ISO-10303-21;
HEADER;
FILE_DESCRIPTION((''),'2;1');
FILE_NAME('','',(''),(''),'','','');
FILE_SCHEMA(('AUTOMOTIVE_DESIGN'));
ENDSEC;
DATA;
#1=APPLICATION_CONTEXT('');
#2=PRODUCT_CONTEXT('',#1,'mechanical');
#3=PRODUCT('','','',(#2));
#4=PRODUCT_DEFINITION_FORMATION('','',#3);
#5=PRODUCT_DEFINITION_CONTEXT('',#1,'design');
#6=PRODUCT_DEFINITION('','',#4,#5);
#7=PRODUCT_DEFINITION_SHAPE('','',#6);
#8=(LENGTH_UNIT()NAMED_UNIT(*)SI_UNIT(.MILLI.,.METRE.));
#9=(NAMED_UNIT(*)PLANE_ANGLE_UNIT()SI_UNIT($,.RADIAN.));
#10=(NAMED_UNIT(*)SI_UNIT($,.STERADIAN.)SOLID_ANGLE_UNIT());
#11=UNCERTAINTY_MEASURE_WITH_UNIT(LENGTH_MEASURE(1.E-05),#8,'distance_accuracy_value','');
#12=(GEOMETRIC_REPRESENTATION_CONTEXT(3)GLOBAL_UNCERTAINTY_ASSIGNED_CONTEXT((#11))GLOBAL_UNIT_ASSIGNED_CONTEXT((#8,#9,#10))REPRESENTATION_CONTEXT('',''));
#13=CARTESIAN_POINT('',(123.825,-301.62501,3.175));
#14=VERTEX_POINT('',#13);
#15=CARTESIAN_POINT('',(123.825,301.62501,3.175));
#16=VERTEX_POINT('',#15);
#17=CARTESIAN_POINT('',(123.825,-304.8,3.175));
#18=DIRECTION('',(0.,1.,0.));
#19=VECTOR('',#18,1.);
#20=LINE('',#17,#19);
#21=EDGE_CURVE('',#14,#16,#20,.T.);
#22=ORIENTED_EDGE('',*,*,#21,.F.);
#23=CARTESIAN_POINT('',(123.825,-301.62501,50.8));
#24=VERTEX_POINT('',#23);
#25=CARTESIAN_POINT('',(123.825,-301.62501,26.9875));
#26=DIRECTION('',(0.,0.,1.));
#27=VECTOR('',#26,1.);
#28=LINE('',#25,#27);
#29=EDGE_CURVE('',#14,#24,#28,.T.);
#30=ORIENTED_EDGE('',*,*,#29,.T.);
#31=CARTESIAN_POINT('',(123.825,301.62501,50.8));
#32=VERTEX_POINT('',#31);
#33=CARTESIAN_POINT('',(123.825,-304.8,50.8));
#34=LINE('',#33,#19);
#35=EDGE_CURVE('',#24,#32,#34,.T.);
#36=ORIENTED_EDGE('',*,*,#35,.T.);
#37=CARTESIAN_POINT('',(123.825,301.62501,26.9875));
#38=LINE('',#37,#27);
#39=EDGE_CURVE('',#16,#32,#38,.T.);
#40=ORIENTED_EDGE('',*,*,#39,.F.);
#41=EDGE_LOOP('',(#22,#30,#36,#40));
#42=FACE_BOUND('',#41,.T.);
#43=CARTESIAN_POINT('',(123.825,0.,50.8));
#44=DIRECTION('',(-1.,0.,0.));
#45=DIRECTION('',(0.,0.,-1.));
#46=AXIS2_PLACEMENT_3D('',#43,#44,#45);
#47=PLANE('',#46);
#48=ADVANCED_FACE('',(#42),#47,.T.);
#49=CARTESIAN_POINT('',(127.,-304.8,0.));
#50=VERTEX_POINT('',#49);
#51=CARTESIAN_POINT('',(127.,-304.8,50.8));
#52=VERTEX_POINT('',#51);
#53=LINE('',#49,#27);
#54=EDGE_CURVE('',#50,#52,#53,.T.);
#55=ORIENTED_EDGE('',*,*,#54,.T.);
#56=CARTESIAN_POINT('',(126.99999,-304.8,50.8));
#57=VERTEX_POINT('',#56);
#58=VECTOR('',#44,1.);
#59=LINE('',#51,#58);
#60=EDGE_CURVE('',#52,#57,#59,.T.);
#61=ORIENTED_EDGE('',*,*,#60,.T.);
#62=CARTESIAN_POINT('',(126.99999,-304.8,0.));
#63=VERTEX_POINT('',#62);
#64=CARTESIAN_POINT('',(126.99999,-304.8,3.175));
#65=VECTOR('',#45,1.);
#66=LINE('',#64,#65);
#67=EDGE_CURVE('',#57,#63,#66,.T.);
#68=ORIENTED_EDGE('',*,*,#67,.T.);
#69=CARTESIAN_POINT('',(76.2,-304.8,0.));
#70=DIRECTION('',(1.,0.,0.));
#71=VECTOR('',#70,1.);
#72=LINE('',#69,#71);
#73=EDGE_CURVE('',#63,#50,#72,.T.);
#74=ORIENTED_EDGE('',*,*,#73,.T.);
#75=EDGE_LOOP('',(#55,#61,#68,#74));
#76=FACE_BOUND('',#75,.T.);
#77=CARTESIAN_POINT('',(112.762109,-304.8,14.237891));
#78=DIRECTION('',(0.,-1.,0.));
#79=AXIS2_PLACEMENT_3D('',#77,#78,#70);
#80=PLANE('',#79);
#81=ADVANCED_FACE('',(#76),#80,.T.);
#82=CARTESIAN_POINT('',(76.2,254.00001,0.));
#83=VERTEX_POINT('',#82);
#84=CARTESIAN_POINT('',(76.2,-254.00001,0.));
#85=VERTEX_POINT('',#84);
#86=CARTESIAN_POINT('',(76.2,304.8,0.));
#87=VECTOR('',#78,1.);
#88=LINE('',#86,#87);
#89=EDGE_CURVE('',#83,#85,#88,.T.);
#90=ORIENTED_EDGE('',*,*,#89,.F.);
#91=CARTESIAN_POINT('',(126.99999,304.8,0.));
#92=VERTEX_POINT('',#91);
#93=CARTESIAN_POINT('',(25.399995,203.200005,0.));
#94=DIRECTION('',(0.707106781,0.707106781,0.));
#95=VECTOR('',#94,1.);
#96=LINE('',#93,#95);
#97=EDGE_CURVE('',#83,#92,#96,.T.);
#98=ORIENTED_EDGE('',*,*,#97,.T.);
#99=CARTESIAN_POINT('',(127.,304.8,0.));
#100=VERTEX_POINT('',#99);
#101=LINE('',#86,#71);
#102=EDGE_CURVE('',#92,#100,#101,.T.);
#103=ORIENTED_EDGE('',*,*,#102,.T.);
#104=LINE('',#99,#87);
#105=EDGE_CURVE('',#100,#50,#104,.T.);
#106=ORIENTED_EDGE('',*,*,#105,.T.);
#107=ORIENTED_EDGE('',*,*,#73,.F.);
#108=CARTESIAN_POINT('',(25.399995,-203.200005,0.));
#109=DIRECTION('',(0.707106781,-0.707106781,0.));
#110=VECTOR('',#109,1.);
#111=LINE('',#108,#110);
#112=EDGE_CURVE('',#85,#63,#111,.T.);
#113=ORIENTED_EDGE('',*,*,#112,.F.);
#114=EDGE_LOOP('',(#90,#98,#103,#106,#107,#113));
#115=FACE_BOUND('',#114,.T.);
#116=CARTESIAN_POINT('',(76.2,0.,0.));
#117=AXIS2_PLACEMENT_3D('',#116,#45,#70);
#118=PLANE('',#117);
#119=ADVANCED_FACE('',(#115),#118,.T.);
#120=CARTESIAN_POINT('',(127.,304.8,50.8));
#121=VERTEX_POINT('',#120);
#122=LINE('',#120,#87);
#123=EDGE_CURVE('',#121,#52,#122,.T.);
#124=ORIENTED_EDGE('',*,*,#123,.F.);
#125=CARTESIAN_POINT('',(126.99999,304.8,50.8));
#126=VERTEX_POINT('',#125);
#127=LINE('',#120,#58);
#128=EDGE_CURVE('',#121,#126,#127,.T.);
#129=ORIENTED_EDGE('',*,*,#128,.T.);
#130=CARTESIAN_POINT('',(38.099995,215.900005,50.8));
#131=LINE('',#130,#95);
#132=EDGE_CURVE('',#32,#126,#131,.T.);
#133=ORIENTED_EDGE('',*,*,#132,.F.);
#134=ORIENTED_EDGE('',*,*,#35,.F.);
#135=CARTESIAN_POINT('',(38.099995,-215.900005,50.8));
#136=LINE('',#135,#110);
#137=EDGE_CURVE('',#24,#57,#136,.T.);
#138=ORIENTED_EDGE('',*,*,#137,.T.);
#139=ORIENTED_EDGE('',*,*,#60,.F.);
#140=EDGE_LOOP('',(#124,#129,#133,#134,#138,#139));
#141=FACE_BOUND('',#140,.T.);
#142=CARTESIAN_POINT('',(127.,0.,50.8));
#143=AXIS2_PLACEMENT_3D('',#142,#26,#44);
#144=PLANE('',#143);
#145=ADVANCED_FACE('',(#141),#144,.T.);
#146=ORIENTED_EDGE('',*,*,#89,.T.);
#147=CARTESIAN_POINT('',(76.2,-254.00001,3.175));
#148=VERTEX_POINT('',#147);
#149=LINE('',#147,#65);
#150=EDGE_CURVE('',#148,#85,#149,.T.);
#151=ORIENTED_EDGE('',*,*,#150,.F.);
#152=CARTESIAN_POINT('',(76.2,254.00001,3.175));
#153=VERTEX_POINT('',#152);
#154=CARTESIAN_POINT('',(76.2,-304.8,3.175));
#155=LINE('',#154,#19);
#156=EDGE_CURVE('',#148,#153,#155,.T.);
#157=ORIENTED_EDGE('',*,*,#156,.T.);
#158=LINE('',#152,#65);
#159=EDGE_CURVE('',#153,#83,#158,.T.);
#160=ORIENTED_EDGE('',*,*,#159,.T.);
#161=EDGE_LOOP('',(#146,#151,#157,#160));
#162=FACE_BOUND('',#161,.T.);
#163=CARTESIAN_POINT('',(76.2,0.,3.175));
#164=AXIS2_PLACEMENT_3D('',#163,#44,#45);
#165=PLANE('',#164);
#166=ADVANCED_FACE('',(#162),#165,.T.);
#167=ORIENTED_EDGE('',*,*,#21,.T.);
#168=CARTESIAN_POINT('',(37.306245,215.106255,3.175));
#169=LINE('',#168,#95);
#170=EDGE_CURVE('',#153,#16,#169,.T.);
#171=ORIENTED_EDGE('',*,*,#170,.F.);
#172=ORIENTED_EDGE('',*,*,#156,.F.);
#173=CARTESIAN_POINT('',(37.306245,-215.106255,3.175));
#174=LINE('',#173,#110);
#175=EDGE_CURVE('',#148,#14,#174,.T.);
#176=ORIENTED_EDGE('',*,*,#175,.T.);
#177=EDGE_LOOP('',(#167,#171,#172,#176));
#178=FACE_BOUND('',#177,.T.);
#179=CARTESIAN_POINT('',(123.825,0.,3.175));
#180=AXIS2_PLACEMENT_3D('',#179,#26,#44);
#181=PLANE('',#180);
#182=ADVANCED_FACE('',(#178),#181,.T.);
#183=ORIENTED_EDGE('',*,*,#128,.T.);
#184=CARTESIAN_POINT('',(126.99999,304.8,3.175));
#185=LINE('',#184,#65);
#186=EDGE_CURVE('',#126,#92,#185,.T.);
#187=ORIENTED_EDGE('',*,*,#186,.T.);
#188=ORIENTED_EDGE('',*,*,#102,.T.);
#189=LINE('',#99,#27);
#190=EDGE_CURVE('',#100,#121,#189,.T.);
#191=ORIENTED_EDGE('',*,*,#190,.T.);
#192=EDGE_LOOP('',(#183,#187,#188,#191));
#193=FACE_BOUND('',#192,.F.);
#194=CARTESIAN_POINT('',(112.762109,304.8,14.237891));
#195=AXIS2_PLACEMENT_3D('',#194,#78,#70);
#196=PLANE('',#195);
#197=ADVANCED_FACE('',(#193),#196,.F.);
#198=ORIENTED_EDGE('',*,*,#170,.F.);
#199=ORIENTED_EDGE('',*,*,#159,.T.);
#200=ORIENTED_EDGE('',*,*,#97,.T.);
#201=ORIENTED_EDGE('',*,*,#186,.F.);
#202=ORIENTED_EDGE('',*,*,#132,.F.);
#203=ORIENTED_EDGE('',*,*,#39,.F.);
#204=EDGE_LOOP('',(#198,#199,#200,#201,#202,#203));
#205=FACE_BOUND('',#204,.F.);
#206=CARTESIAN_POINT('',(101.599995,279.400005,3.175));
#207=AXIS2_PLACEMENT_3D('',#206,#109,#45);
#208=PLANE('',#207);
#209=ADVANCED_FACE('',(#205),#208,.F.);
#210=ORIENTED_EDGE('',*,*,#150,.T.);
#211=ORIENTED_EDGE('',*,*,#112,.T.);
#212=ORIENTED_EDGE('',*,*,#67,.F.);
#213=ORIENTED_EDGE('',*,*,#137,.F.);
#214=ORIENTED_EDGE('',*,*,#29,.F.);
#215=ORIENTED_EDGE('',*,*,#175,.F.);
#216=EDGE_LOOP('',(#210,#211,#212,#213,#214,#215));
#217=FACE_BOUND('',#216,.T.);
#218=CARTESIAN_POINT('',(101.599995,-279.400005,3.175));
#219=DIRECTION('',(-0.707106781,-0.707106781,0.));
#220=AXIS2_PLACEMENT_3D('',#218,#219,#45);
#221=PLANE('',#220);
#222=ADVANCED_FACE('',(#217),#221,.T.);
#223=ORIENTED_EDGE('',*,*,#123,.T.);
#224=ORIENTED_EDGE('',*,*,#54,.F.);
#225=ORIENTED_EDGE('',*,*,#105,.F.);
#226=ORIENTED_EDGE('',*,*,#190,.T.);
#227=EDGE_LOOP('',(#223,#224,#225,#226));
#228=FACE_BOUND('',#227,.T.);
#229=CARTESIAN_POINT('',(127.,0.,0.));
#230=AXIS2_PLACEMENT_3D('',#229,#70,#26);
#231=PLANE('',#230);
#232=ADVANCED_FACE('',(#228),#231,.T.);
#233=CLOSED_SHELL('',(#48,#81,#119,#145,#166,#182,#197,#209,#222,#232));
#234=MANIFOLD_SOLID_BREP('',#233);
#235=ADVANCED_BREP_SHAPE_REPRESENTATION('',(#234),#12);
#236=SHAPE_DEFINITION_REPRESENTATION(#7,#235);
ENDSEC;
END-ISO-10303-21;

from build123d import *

# Parameters (mm, degrees)
F1_DEPTH = 304.8
F2_SIZE  = 50.79999
F3_SIZE  = 50.79999


# Not quite as in the source:
# - a fillet or chamfer is up to 0.001 mm smaller than in the source, because OpenCascade refuses the exact size


with BuildPart() as f1:
    # F0 (on Front) → F1 (new body, symmetric)
    with BuildSketch(Plane.XZ):
        Polygon((76.2, 3.175), (76.2, 0), (127, 0), (127, 50.8), (123.825, 50.8), (123.825, 3.175), align=None)
    extrude(amount=F1_DEPTH, both=True)

    # F2 (size 50.8 in the source; OpenCascade refuses exactly that, so slightly less here)
    f2_edges = [f1.edges().sort_by_distance(p)[0] for p in [
        (76.2, -304.8, 1.5875),
    ]]
    chamfer(f2_edges, length=F2_SIZE)

    # F3 (size 50.8 in the source; OpenCascade refuses exactly that, so slightly less here)
    f3_edges = [f1.edges().sort_by_distance(p)[0] for p in [
        (76.2, 304.8, 1.5875),
    ]]
    chamfer(f3_edges, length=F3_SIZE)


solid = f1.part
